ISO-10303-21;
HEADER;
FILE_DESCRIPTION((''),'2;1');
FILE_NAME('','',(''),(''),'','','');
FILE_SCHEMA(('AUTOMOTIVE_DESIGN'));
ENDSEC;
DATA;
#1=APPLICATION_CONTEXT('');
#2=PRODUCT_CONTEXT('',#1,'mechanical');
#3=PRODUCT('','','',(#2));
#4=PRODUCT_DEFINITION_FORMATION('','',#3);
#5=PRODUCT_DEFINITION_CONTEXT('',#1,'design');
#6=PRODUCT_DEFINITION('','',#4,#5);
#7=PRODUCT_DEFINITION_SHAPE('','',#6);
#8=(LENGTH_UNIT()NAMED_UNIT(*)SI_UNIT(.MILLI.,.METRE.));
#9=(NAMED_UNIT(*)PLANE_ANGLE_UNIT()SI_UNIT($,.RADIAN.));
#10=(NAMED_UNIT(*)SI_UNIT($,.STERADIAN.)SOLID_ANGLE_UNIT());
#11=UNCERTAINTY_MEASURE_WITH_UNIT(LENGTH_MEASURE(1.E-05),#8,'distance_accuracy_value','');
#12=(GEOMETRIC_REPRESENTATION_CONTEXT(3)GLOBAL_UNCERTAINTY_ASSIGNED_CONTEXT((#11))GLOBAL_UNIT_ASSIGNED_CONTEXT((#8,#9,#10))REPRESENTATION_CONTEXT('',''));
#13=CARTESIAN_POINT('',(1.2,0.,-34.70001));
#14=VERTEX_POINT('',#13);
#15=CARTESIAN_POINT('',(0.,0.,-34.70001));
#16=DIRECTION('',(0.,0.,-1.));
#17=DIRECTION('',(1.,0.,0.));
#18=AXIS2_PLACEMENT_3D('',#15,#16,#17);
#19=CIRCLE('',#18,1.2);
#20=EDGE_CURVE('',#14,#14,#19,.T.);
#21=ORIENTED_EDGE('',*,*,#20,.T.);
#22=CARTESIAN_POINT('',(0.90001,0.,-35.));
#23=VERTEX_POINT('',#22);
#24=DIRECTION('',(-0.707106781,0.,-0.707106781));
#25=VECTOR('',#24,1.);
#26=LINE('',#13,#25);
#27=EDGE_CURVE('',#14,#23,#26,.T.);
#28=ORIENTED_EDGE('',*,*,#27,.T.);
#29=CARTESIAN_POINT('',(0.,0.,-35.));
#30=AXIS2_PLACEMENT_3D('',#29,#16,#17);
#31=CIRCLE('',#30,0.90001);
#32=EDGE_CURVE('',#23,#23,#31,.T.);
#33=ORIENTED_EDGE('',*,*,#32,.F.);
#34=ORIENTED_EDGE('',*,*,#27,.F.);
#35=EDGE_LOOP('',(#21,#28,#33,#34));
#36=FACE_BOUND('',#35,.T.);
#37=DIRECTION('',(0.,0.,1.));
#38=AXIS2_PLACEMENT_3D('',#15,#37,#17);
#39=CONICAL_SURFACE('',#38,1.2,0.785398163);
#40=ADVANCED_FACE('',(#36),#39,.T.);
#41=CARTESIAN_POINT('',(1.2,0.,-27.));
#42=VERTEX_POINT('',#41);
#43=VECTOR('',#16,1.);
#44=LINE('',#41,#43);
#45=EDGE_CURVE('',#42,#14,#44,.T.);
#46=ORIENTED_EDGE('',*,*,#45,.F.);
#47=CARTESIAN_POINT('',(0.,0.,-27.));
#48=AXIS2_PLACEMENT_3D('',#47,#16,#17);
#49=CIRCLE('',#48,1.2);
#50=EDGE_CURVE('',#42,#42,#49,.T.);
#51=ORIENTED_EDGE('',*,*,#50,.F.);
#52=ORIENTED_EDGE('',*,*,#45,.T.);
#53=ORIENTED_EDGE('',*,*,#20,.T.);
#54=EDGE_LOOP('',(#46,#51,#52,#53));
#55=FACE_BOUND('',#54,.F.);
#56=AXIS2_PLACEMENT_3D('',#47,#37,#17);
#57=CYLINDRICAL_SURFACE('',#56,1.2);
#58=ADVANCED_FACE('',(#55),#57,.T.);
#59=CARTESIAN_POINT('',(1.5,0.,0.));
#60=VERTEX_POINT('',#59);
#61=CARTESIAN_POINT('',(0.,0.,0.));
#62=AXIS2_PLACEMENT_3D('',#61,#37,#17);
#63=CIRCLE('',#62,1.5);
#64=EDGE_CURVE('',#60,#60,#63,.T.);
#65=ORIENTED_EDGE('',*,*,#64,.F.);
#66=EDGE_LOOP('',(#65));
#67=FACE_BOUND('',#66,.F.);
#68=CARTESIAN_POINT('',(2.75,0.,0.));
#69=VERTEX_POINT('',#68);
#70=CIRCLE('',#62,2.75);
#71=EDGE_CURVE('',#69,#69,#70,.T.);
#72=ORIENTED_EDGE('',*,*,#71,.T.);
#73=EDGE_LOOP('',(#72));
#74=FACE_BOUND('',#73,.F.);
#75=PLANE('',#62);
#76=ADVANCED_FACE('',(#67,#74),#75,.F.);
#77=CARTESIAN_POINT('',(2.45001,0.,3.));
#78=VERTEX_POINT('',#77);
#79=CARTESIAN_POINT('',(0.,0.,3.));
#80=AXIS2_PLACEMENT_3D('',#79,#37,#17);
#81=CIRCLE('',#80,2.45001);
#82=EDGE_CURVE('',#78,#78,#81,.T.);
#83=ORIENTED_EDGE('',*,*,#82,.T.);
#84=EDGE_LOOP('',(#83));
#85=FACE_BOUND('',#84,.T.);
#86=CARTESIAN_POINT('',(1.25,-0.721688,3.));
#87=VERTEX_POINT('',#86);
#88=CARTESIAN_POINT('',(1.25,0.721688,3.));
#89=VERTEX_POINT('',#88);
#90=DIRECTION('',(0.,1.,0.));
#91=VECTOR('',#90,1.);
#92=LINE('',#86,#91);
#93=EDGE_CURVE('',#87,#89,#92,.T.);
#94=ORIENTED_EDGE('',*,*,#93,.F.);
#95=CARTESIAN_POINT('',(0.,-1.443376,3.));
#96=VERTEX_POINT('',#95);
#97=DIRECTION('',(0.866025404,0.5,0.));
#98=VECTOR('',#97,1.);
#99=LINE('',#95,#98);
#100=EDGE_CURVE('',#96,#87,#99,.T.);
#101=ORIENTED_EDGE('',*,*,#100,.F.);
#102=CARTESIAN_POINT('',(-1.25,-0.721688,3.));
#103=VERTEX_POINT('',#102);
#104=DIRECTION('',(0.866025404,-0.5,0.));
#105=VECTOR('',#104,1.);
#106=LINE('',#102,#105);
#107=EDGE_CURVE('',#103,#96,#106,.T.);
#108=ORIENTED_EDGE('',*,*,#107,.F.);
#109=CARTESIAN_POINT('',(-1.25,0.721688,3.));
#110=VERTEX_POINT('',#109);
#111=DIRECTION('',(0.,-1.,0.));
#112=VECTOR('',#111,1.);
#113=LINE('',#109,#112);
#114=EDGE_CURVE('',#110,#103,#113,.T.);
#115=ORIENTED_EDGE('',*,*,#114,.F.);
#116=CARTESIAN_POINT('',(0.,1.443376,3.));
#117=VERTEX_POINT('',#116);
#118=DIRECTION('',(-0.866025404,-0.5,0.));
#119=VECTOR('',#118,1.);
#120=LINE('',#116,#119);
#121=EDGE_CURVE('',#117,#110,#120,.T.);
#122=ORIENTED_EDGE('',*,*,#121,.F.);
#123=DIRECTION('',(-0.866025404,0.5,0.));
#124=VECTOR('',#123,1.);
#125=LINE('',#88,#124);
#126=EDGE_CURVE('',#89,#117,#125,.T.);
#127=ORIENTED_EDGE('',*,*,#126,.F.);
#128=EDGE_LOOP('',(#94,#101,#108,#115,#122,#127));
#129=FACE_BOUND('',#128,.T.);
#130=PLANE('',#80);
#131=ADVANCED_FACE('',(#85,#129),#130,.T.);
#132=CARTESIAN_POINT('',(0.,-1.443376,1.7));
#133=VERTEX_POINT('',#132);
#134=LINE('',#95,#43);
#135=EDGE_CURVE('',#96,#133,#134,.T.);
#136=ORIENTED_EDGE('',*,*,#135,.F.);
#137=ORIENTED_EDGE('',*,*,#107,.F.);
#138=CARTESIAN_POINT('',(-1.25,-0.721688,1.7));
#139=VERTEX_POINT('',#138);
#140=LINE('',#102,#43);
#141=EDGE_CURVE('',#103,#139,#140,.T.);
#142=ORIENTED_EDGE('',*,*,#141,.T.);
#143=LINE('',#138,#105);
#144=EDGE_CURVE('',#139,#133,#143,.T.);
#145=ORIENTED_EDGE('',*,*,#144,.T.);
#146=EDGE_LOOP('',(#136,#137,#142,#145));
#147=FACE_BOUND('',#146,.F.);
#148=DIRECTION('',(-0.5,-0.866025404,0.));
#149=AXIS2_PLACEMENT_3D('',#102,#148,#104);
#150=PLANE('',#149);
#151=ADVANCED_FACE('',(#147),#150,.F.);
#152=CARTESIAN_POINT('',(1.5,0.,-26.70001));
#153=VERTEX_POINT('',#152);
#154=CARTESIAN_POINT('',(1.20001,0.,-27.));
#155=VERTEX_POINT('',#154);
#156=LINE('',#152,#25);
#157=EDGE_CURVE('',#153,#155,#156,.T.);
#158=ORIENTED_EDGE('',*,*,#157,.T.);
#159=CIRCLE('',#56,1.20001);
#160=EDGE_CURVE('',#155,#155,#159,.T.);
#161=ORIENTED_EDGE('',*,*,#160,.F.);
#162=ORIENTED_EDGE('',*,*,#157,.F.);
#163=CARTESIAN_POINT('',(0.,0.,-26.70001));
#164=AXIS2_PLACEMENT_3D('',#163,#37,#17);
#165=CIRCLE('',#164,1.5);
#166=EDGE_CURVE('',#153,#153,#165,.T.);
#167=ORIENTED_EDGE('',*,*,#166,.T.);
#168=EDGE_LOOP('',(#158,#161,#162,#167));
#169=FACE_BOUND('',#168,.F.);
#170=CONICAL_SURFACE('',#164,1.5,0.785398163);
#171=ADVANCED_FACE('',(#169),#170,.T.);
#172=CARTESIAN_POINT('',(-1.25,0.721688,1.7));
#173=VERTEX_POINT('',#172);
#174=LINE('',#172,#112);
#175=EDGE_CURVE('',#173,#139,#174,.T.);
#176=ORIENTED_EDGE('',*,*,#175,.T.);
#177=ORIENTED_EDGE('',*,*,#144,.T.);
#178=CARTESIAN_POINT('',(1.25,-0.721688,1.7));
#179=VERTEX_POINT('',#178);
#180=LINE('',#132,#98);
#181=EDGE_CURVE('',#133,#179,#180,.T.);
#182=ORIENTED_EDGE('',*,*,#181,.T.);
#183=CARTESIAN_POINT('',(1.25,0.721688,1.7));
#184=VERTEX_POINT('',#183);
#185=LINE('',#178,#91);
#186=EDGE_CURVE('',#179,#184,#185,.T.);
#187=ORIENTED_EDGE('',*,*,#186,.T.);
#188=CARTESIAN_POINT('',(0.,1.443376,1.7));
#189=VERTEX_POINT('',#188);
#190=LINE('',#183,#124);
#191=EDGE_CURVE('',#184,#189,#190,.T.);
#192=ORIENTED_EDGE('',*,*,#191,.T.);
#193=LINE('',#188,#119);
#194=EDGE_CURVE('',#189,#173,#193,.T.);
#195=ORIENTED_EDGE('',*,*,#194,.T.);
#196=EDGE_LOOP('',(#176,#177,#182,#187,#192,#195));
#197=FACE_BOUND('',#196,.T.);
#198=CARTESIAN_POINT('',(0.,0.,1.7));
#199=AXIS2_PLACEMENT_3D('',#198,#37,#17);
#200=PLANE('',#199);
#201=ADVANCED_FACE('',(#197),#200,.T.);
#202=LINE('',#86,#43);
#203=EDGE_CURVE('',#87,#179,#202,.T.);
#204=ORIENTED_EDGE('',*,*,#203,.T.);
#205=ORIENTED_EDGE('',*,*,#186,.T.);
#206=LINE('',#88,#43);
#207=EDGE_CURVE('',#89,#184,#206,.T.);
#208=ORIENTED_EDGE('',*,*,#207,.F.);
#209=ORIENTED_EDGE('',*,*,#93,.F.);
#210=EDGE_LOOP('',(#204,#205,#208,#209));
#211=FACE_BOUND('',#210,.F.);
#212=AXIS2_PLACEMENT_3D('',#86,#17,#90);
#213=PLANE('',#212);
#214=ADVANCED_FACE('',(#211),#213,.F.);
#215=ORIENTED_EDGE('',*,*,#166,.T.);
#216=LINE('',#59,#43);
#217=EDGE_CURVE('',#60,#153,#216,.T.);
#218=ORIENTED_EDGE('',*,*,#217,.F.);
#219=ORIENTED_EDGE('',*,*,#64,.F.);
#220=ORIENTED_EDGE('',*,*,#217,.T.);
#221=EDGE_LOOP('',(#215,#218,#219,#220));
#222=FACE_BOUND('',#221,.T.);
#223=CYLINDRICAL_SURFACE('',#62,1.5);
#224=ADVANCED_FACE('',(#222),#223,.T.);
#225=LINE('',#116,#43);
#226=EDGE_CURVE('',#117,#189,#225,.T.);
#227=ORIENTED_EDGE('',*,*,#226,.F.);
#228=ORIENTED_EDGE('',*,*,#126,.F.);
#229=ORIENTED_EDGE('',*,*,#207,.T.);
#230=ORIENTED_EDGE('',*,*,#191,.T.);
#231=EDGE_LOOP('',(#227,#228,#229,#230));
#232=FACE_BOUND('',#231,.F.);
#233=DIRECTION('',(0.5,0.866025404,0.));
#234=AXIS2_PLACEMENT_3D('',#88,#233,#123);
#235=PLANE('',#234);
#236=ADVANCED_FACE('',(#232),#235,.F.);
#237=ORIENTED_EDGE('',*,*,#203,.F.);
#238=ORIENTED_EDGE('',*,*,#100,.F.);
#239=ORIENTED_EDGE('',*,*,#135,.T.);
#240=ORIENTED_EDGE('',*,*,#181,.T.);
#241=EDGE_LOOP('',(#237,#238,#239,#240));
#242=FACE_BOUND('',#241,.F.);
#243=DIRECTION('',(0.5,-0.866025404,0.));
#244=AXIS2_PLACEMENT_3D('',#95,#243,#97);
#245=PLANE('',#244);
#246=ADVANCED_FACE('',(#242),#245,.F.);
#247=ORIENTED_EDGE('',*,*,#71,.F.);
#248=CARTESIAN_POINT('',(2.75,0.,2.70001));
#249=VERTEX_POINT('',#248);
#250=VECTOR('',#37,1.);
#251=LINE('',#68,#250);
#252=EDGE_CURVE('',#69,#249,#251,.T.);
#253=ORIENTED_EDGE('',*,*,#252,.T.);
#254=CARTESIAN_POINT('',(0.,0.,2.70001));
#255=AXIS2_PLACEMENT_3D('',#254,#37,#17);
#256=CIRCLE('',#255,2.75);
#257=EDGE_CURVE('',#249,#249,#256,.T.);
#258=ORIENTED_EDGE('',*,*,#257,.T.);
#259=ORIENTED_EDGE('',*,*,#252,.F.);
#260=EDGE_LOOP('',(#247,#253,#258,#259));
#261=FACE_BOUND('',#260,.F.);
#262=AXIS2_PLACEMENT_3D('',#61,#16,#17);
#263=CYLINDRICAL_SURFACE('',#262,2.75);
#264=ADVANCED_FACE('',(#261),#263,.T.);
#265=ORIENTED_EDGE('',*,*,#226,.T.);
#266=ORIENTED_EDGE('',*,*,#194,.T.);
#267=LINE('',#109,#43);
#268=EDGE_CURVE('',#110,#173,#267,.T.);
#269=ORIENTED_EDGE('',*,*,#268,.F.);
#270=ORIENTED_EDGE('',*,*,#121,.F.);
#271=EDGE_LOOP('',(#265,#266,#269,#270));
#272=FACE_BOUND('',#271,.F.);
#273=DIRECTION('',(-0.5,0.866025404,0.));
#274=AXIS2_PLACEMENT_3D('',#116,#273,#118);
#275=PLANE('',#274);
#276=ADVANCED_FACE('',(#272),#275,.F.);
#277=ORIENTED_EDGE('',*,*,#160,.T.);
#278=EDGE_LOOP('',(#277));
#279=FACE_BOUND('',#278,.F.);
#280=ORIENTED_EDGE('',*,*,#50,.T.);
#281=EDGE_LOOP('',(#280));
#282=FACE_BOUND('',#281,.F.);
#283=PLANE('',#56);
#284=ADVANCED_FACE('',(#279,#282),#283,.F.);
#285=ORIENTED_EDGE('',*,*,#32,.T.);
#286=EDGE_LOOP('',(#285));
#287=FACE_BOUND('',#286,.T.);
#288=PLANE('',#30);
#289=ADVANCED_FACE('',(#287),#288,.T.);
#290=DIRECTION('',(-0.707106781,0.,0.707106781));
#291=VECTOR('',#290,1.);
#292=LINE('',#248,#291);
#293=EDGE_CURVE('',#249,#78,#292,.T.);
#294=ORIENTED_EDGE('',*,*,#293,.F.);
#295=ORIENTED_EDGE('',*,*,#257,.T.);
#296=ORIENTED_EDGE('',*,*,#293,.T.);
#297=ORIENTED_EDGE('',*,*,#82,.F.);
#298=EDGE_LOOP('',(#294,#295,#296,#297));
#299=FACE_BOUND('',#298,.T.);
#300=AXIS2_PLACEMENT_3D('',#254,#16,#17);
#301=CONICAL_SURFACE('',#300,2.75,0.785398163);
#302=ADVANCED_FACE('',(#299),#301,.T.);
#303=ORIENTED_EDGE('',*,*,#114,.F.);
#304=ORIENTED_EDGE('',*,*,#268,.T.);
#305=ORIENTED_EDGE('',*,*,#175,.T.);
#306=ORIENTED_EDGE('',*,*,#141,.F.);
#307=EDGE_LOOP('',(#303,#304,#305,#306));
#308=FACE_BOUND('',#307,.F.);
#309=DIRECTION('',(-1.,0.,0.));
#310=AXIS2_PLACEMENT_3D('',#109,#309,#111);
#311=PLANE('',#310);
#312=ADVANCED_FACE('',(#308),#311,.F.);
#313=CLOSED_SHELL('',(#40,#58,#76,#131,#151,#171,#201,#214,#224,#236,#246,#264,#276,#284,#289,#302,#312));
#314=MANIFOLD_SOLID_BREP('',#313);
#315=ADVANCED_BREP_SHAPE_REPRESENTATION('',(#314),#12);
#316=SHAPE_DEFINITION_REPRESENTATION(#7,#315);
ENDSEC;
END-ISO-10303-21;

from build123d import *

# Parameters (mm, degrees)
F3_R       = 1.5
F4_DEPTH   = 27
F5_R       = 1.2
F6_DEPTH   = 8
F3_R_2     = 2.75
F4_FACE1_R = 1.5
F7_DEPTH   = 3
F8_SIZE    = 0.29999
F10_DEPTH  = 1.3


# Not quite as in the source:
# - a fillet or chamfer is up to 0.001 mm smaller than in the source, because OpenCascade refuses the exact size


with BuildPart() as f4:
    # F3 (on Top) → F4 (new body)
    with BuildSketch(Plane.XY):
        Circle(F3_R)
    extrude(amount=-F4_DEPTH)

    # F5 (on face) → F6 (join)
    with BuildSketch(Plane(origin=(0, 0, -27), x_dir=(1, 0, 0), z_dir=(0, 0, -1))):
        Circle(F5_R)
    extrude(amount=F6_DEPTH)

    # F3 (on Top) + F4_face1 (on face) → F7 (join)
    with BuildSketch(Plane.XY):
        Circle(F3_R_2)
        Circle(F3_R, mode=Mode.SUBTRACT)
    with BuildSketch(Plane.XY):
        Circle(F4_FACE1_R)
    extrude(amount=F7_DEPTH)

    # F8 (size 0.3 in the source; OpenCascade refuses exactly that, so slightly less here)
    f8_edges = [f4.edges().sort_by_distance(p)[0] for p in [
        (-1.5, 0, -27),
        (-2.75, 0, 3),
        (-1.2, 0, -35),
    ]]
    chamfer(f8_edges, length=F8_SIZE)

    # F9 (on face) → F10 (cut)
    with BuildSketch(Plane.XY.offset(3)):
        Polygon((1.25, -0.7216878365), (1.25, 0.7216878365), (0, 1.443375673), (-1.25, 0.7216878365), (-1.25, -0.7216878365), (0, -1.443375673), align=None)
    extrude(amount=-F10_DEPTH, mode=Mode.SUBTRACT)


solid = f4.part
